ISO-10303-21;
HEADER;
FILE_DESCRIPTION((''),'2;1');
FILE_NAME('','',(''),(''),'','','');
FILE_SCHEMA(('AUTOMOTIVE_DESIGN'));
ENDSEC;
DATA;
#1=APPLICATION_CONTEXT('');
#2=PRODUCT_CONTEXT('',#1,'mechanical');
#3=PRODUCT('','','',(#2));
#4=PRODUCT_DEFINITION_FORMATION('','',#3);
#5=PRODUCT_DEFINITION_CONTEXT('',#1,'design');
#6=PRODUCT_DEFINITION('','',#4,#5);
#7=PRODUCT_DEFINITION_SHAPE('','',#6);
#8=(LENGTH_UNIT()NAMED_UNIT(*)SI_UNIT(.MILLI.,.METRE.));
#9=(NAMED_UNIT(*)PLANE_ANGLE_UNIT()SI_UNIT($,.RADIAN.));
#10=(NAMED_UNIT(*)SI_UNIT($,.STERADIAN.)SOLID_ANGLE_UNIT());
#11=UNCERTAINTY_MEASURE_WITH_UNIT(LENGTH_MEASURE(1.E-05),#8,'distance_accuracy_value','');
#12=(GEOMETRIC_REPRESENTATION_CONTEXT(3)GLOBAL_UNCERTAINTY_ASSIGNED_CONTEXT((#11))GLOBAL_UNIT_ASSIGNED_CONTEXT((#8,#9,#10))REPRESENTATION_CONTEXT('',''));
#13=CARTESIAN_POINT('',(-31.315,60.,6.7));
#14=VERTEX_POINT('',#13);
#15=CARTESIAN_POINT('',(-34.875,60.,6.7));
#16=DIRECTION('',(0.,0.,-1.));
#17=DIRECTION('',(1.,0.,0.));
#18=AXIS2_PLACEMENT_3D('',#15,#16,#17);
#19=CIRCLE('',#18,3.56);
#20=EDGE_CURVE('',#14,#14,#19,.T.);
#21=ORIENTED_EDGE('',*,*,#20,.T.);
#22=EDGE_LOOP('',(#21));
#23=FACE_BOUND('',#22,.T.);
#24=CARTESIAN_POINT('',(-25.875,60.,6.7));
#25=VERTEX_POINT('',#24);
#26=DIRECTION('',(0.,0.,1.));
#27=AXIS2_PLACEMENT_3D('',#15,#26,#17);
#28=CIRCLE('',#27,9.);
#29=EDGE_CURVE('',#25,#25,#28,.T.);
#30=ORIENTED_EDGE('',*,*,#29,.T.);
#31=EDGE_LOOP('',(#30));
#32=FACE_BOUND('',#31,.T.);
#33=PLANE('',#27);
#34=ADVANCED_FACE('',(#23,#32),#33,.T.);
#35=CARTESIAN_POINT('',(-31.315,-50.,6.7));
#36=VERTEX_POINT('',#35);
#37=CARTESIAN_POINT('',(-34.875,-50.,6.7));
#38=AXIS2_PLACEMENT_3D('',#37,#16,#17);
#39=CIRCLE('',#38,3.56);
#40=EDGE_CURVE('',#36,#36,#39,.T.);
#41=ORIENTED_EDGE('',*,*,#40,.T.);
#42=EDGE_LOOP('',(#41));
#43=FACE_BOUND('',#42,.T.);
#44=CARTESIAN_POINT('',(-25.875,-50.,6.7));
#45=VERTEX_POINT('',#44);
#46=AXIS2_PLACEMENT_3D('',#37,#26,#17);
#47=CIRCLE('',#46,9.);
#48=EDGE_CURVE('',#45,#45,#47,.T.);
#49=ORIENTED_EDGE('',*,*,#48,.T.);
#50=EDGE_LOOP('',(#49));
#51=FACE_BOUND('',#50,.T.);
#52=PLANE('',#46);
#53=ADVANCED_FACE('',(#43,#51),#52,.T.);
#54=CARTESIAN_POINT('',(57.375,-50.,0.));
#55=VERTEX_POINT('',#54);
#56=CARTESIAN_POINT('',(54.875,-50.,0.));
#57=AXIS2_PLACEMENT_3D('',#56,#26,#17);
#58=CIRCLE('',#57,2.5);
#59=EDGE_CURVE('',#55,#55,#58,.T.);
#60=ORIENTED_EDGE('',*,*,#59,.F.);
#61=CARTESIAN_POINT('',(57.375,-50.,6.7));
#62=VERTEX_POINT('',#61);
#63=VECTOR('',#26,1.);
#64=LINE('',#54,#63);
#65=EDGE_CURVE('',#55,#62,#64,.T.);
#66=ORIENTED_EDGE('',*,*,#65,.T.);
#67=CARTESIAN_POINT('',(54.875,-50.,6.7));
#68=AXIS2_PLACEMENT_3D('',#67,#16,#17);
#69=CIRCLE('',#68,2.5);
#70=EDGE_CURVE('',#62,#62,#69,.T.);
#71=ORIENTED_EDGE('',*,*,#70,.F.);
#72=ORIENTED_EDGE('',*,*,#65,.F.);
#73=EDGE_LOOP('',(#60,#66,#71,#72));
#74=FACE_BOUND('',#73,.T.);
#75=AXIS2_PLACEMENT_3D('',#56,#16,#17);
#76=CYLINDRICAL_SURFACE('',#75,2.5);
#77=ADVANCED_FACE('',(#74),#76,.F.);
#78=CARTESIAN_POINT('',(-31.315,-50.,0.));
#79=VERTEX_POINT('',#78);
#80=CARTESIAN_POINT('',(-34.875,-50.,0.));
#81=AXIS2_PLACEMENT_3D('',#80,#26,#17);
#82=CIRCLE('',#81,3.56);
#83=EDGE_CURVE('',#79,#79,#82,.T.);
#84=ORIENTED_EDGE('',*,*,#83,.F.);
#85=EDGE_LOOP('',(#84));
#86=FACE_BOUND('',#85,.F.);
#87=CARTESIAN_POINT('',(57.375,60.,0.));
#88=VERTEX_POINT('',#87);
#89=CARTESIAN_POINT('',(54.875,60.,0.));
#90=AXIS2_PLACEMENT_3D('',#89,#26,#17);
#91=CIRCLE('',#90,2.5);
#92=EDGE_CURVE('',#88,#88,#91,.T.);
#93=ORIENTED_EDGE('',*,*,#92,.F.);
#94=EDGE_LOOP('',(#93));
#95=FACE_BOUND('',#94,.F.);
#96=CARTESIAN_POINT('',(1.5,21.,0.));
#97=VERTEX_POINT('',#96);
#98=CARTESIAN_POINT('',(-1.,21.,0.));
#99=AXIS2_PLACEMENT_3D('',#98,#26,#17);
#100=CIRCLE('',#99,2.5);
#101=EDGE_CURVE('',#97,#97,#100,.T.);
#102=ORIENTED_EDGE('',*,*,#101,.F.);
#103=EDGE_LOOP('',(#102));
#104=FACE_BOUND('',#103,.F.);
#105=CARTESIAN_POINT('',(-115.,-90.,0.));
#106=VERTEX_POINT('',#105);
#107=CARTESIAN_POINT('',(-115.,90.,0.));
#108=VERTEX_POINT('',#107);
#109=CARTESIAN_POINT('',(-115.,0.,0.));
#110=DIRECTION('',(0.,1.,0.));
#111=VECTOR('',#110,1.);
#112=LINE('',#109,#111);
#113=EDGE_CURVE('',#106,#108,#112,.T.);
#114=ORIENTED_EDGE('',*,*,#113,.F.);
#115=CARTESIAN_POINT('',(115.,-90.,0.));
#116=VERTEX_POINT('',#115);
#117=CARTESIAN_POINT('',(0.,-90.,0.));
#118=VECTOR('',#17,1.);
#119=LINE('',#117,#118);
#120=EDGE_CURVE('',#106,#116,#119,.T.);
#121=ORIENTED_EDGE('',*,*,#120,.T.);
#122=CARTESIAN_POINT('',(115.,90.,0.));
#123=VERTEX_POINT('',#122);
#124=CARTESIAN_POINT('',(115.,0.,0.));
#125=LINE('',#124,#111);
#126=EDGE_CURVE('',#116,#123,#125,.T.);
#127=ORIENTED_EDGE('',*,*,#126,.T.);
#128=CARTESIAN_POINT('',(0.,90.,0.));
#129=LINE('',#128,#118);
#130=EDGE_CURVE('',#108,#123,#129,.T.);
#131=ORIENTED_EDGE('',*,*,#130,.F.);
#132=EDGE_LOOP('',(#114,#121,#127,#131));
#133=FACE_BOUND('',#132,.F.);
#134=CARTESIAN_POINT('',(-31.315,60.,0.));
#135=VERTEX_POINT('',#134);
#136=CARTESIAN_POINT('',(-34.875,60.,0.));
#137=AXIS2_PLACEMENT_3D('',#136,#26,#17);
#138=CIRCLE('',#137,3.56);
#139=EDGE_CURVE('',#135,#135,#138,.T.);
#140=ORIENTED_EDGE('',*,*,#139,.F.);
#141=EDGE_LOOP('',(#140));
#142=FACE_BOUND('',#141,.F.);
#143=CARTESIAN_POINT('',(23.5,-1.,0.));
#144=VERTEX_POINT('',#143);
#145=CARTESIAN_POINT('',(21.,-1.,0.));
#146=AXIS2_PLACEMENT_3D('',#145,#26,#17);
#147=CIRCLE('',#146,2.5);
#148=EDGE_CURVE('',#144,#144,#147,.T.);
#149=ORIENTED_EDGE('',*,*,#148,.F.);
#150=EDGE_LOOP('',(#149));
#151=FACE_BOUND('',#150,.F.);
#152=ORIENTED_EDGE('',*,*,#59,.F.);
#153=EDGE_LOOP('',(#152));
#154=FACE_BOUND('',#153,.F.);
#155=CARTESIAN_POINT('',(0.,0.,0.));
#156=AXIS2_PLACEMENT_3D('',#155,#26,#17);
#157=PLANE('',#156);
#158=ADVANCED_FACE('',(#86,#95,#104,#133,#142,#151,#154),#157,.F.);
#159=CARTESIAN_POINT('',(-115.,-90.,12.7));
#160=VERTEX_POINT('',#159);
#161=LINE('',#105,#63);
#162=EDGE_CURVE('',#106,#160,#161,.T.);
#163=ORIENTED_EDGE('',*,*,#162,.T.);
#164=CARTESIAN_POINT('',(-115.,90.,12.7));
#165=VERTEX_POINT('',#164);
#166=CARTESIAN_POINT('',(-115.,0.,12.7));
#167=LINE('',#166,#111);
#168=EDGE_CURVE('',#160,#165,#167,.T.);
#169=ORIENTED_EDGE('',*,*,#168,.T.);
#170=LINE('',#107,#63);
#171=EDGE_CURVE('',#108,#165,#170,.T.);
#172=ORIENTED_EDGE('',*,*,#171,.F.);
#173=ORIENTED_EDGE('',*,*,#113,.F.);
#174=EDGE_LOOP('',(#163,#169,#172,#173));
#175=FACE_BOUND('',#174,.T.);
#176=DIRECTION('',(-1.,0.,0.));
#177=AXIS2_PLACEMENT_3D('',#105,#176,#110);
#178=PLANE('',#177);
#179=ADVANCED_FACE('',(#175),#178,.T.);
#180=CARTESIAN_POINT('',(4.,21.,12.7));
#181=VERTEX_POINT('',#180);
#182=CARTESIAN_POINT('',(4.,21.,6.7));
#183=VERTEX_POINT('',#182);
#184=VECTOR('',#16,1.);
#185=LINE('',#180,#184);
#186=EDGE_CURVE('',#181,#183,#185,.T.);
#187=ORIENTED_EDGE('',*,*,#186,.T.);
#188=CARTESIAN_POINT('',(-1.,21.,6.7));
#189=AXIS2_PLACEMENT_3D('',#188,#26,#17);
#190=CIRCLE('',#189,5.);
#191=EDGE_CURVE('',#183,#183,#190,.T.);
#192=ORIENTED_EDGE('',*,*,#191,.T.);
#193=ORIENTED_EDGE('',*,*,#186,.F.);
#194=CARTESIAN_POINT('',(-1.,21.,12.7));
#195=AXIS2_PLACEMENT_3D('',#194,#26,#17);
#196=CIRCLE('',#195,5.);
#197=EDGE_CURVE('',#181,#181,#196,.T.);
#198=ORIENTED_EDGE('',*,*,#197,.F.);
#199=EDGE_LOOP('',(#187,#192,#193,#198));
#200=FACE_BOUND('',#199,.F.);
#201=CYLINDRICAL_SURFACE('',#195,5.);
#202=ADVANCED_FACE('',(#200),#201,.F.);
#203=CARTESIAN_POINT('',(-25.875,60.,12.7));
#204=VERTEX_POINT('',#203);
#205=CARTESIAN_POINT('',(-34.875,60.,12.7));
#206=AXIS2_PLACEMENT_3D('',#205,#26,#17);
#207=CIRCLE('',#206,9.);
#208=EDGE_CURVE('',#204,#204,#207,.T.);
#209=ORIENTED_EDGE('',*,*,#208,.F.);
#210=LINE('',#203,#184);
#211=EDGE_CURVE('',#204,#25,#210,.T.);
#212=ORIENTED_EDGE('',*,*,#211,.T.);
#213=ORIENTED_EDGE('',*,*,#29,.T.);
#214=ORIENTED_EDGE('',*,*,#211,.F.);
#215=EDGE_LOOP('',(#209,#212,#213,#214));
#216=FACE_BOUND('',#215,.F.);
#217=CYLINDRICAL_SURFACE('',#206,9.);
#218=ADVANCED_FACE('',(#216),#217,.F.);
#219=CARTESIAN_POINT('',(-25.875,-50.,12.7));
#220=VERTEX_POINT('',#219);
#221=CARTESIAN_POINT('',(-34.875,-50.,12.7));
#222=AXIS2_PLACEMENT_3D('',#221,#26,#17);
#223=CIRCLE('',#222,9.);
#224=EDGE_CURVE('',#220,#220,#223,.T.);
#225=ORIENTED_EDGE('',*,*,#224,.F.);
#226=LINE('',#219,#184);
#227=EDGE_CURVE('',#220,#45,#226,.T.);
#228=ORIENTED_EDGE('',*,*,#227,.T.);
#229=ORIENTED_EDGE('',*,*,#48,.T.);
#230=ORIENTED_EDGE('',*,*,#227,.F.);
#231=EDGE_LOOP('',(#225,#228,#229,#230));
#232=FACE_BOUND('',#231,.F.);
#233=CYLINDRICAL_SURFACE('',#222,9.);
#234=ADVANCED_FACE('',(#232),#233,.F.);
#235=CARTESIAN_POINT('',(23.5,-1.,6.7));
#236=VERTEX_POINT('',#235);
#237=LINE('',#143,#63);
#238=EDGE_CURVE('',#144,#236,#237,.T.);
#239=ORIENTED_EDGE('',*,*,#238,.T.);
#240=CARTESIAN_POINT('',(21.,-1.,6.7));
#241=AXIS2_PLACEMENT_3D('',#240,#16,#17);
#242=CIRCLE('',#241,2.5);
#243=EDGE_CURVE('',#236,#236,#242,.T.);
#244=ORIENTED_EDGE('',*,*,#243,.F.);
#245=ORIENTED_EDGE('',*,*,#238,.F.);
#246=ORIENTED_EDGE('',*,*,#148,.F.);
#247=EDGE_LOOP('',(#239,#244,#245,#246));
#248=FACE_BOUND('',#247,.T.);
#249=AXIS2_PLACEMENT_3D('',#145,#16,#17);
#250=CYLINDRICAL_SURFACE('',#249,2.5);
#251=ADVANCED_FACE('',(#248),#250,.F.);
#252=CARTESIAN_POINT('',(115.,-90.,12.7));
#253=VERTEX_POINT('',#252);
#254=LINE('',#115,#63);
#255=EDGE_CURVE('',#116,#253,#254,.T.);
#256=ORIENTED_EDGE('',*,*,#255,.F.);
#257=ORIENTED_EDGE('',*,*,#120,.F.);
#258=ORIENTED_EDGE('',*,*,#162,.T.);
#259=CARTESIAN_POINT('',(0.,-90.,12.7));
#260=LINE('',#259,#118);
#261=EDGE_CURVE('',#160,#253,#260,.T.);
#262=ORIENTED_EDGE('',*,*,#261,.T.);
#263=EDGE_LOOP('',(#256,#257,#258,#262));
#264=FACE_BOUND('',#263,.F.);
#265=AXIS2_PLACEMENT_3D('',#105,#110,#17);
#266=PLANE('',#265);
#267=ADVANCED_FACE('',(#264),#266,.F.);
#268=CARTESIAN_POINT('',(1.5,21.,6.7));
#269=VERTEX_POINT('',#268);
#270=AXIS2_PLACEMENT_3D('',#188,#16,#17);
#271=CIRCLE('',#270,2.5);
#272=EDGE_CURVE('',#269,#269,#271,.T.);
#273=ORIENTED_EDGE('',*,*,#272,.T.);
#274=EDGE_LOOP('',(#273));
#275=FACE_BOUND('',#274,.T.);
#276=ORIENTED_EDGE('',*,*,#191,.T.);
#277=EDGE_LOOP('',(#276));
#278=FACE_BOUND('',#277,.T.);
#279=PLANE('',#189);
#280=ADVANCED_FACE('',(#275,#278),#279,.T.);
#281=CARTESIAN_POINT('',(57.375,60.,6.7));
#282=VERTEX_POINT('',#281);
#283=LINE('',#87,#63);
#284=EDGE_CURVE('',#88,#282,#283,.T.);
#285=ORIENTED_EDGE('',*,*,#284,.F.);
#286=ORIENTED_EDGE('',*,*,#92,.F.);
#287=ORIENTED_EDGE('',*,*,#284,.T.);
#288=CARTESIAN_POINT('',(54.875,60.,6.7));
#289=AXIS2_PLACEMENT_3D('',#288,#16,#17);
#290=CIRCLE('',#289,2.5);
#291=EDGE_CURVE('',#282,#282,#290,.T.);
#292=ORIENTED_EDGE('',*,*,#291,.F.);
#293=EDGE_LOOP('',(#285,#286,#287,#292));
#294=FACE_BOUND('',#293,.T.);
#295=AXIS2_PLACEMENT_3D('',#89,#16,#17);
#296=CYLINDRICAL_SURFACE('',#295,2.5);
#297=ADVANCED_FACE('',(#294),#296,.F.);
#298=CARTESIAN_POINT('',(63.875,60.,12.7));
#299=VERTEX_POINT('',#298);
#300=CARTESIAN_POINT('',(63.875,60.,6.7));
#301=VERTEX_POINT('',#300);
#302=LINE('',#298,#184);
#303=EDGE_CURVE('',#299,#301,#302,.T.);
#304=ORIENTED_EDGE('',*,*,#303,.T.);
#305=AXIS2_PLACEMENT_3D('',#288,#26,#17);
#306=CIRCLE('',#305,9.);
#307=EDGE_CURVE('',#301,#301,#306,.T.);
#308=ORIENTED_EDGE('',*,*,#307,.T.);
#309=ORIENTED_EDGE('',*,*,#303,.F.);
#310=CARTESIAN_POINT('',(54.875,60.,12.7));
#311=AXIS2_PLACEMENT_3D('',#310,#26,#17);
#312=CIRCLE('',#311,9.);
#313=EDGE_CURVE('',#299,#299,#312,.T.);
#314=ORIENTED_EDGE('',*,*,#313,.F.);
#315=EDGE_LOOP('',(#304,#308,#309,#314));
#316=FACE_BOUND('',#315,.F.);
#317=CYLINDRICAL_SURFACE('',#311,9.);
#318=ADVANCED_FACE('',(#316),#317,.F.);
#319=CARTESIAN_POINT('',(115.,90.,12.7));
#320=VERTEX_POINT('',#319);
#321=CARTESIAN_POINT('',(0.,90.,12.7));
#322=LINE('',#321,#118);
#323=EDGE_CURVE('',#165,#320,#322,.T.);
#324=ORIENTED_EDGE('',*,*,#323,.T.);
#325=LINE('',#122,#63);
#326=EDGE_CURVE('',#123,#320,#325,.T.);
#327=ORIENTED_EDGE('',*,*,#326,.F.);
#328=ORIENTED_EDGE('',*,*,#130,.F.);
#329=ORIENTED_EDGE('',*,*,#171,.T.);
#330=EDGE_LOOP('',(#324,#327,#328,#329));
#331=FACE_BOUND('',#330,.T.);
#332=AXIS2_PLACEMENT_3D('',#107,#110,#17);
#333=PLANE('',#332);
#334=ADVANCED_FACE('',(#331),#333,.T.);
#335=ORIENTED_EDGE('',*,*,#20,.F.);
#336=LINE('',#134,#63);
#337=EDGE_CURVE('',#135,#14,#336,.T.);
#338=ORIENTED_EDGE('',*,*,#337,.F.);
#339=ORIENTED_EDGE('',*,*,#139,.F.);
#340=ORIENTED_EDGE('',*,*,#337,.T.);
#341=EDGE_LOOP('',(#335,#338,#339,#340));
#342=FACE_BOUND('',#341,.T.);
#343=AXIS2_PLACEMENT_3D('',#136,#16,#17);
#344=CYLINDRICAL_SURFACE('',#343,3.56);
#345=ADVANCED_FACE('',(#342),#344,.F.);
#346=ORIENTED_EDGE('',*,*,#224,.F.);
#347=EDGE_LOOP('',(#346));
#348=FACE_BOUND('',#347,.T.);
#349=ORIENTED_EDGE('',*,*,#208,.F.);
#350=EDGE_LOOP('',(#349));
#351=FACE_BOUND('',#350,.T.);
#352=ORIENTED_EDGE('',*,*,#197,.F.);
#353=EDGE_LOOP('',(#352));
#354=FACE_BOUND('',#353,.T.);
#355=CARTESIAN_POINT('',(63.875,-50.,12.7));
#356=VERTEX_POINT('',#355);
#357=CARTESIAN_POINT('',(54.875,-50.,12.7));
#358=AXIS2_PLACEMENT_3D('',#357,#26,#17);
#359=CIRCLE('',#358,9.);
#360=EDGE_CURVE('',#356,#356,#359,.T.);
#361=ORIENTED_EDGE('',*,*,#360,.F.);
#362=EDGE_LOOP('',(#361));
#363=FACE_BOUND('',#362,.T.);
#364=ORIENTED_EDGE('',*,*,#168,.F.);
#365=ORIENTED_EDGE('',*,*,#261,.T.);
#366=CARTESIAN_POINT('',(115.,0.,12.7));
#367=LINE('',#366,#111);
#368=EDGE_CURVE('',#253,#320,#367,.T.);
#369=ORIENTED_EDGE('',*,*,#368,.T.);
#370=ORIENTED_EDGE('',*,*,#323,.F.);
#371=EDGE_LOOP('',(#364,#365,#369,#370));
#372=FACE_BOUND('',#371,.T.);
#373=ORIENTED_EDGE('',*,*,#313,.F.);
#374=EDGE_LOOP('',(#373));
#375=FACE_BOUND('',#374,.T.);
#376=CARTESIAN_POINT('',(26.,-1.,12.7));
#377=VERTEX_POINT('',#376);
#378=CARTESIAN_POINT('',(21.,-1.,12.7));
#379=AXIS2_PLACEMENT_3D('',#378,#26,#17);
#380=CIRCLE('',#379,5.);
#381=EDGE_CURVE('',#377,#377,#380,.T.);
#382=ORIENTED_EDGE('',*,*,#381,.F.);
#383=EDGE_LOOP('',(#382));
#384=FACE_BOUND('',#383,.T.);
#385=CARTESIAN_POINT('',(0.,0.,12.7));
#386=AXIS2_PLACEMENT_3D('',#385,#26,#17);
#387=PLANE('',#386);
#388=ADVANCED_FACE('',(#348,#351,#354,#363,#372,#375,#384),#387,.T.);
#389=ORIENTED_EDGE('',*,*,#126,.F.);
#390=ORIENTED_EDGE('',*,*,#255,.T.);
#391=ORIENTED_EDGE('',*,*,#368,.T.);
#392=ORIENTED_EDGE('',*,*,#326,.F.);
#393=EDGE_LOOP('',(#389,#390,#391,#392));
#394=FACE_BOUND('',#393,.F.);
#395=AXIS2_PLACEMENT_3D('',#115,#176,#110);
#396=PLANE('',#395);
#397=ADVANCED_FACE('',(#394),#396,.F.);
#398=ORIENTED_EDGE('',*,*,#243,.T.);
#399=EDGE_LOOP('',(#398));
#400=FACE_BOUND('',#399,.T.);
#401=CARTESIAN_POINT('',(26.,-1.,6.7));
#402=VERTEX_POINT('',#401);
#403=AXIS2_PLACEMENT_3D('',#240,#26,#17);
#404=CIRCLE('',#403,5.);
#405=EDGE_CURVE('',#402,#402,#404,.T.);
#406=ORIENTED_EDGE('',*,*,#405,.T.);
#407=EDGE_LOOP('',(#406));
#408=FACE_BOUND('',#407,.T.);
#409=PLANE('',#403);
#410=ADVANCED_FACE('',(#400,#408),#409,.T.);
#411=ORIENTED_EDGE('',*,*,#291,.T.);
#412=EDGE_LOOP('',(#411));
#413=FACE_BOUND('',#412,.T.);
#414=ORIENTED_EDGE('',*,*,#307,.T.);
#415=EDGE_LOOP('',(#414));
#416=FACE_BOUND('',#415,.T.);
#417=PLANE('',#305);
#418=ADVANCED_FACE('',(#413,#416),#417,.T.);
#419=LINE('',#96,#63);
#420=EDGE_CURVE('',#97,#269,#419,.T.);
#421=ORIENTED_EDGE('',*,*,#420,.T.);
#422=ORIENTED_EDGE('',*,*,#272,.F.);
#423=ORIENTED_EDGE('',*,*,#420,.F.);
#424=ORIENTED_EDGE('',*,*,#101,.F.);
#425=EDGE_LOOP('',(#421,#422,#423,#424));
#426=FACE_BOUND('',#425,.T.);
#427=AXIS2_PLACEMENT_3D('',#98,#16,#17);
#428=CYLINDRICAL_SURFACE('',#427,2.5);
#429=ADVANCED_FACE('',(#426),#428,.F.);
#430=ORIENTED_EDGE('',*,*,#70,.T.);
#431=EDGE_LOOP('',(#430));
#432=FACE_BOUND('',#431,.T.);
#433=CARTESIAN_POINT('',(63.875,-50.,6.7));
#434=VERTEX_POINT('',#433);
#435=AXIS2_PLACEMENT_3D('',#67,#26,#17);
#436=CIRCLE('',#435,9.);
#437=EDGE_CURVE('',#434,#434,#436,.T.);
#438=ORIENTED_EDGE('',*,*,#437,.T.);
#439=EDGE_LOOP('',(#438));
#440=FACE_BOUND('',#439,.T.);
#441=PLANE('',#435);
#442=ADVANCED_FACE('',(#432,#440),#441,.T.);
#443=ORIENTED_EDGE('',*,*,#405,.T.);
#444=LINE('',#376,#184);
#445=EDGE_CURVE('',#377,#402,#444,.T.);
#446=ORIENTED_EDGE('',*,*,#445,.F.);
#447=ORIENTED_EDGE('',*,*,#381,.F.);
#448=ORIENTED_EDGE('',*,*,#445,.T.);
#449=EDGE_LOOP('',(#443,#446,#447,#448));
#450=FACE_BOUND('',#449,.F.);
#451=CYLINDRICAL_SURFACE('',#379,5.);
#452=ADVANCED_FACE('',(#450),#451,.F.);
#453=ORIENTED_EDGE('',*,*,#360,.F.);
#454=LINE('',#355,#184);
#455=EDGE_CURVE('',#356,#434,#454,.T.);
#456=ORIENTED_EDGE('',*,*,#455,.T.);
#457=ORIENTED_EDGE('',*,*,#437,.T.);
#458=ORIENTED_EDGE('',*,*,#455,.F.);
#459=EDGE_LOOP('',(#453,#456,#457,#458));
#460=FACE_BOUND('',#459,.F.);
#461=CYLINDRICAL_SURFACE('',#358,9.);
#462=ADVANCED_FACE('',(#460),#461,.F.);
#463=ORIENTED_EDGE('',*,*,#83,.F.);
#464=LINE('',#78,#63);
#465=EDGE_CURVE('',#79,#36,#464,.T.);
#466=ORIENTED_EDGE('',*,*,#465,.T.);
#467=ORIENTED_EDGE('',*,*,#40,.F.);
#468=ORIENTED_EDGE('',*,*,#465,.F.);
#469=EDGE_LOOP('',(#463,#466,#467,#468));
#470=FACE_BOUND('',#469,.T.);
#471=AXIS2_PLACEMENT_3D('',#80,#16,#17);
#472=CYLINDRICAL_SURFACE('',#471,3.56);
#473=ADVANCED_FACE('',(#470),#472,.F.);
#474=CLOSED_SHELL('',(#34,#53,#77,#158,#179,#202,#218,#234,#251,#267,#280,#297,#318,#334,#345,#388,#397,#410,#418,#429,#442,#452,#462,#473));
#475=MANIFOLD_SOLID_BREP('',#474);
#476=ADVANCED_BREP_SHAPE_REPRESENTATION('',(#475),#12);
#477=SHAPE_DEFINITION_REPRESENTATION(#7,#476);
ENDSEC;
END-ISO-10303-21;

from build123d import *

# Parameters (mm, degrees)
F0_W     = 230
F0_H     = 180
F0_R     = 3.56
F0_R_2   = 2.5
F1_DEPTH = 12.7
F2_R     = 9
F2_R_2   = 5
F3_DEPTH = 6


# Not quite as in the source:
# - a length typed as a fraction of an inch, garbled in the dataset ("3 / 203.2 mm" for 3/8 in), is restored


with BuildPart() as f1:
    # F0 (on Top) → F1 (new body)
    with BuildSketch(Plane.XY):
        Rectangle(F0_W, F0_H)
        with Locations((-34.875, -50)):
            Circle(F0_R, mode=Mode.SUBTRACT)
        with Locations((54.875, -50)):
            Circle(F0_R_2, mode=Mode.SUBTRACT)
        with Locations((21, -1)):
            Circle(F0_R_2, mode=Mode.SUBTRACT)
        with Locations((-1, 21)):
            Circle(F0_R_2, mode=Mode.SUBTRACT)
        with Locations((-34.875, 60)):
            Circle(F0_R, mode=Mode.SUBTRACT)
        with Locations((54.875, 60)):
            Circle(F0_R_2, mode=Mode.SUBTRACT)
    extrude(amount=F1_DEPTH)

    # F2 (on face) → F3 (cut)
    with BuildSketch(Plane.XY.offset(12.7)):
        with Locations((-34.875, 60)):
            Circle(F2_R)
        with Locations((54.875, 60)):
            Circle(F2_R)
        with Locations((-34.875, -50)):
            Circle(F2_R)
        with Locations((54.875, -50)):
            Circle(F2_R)
        with Locations((-1, 21)):
            Circle(F2_R_2)
        with Locations((21, -1)):
            Circle(F2_R_2)
    extrude(amount=-F3_DEPTH, mode=Mode.SUBTRACT)


solid = f1.part
